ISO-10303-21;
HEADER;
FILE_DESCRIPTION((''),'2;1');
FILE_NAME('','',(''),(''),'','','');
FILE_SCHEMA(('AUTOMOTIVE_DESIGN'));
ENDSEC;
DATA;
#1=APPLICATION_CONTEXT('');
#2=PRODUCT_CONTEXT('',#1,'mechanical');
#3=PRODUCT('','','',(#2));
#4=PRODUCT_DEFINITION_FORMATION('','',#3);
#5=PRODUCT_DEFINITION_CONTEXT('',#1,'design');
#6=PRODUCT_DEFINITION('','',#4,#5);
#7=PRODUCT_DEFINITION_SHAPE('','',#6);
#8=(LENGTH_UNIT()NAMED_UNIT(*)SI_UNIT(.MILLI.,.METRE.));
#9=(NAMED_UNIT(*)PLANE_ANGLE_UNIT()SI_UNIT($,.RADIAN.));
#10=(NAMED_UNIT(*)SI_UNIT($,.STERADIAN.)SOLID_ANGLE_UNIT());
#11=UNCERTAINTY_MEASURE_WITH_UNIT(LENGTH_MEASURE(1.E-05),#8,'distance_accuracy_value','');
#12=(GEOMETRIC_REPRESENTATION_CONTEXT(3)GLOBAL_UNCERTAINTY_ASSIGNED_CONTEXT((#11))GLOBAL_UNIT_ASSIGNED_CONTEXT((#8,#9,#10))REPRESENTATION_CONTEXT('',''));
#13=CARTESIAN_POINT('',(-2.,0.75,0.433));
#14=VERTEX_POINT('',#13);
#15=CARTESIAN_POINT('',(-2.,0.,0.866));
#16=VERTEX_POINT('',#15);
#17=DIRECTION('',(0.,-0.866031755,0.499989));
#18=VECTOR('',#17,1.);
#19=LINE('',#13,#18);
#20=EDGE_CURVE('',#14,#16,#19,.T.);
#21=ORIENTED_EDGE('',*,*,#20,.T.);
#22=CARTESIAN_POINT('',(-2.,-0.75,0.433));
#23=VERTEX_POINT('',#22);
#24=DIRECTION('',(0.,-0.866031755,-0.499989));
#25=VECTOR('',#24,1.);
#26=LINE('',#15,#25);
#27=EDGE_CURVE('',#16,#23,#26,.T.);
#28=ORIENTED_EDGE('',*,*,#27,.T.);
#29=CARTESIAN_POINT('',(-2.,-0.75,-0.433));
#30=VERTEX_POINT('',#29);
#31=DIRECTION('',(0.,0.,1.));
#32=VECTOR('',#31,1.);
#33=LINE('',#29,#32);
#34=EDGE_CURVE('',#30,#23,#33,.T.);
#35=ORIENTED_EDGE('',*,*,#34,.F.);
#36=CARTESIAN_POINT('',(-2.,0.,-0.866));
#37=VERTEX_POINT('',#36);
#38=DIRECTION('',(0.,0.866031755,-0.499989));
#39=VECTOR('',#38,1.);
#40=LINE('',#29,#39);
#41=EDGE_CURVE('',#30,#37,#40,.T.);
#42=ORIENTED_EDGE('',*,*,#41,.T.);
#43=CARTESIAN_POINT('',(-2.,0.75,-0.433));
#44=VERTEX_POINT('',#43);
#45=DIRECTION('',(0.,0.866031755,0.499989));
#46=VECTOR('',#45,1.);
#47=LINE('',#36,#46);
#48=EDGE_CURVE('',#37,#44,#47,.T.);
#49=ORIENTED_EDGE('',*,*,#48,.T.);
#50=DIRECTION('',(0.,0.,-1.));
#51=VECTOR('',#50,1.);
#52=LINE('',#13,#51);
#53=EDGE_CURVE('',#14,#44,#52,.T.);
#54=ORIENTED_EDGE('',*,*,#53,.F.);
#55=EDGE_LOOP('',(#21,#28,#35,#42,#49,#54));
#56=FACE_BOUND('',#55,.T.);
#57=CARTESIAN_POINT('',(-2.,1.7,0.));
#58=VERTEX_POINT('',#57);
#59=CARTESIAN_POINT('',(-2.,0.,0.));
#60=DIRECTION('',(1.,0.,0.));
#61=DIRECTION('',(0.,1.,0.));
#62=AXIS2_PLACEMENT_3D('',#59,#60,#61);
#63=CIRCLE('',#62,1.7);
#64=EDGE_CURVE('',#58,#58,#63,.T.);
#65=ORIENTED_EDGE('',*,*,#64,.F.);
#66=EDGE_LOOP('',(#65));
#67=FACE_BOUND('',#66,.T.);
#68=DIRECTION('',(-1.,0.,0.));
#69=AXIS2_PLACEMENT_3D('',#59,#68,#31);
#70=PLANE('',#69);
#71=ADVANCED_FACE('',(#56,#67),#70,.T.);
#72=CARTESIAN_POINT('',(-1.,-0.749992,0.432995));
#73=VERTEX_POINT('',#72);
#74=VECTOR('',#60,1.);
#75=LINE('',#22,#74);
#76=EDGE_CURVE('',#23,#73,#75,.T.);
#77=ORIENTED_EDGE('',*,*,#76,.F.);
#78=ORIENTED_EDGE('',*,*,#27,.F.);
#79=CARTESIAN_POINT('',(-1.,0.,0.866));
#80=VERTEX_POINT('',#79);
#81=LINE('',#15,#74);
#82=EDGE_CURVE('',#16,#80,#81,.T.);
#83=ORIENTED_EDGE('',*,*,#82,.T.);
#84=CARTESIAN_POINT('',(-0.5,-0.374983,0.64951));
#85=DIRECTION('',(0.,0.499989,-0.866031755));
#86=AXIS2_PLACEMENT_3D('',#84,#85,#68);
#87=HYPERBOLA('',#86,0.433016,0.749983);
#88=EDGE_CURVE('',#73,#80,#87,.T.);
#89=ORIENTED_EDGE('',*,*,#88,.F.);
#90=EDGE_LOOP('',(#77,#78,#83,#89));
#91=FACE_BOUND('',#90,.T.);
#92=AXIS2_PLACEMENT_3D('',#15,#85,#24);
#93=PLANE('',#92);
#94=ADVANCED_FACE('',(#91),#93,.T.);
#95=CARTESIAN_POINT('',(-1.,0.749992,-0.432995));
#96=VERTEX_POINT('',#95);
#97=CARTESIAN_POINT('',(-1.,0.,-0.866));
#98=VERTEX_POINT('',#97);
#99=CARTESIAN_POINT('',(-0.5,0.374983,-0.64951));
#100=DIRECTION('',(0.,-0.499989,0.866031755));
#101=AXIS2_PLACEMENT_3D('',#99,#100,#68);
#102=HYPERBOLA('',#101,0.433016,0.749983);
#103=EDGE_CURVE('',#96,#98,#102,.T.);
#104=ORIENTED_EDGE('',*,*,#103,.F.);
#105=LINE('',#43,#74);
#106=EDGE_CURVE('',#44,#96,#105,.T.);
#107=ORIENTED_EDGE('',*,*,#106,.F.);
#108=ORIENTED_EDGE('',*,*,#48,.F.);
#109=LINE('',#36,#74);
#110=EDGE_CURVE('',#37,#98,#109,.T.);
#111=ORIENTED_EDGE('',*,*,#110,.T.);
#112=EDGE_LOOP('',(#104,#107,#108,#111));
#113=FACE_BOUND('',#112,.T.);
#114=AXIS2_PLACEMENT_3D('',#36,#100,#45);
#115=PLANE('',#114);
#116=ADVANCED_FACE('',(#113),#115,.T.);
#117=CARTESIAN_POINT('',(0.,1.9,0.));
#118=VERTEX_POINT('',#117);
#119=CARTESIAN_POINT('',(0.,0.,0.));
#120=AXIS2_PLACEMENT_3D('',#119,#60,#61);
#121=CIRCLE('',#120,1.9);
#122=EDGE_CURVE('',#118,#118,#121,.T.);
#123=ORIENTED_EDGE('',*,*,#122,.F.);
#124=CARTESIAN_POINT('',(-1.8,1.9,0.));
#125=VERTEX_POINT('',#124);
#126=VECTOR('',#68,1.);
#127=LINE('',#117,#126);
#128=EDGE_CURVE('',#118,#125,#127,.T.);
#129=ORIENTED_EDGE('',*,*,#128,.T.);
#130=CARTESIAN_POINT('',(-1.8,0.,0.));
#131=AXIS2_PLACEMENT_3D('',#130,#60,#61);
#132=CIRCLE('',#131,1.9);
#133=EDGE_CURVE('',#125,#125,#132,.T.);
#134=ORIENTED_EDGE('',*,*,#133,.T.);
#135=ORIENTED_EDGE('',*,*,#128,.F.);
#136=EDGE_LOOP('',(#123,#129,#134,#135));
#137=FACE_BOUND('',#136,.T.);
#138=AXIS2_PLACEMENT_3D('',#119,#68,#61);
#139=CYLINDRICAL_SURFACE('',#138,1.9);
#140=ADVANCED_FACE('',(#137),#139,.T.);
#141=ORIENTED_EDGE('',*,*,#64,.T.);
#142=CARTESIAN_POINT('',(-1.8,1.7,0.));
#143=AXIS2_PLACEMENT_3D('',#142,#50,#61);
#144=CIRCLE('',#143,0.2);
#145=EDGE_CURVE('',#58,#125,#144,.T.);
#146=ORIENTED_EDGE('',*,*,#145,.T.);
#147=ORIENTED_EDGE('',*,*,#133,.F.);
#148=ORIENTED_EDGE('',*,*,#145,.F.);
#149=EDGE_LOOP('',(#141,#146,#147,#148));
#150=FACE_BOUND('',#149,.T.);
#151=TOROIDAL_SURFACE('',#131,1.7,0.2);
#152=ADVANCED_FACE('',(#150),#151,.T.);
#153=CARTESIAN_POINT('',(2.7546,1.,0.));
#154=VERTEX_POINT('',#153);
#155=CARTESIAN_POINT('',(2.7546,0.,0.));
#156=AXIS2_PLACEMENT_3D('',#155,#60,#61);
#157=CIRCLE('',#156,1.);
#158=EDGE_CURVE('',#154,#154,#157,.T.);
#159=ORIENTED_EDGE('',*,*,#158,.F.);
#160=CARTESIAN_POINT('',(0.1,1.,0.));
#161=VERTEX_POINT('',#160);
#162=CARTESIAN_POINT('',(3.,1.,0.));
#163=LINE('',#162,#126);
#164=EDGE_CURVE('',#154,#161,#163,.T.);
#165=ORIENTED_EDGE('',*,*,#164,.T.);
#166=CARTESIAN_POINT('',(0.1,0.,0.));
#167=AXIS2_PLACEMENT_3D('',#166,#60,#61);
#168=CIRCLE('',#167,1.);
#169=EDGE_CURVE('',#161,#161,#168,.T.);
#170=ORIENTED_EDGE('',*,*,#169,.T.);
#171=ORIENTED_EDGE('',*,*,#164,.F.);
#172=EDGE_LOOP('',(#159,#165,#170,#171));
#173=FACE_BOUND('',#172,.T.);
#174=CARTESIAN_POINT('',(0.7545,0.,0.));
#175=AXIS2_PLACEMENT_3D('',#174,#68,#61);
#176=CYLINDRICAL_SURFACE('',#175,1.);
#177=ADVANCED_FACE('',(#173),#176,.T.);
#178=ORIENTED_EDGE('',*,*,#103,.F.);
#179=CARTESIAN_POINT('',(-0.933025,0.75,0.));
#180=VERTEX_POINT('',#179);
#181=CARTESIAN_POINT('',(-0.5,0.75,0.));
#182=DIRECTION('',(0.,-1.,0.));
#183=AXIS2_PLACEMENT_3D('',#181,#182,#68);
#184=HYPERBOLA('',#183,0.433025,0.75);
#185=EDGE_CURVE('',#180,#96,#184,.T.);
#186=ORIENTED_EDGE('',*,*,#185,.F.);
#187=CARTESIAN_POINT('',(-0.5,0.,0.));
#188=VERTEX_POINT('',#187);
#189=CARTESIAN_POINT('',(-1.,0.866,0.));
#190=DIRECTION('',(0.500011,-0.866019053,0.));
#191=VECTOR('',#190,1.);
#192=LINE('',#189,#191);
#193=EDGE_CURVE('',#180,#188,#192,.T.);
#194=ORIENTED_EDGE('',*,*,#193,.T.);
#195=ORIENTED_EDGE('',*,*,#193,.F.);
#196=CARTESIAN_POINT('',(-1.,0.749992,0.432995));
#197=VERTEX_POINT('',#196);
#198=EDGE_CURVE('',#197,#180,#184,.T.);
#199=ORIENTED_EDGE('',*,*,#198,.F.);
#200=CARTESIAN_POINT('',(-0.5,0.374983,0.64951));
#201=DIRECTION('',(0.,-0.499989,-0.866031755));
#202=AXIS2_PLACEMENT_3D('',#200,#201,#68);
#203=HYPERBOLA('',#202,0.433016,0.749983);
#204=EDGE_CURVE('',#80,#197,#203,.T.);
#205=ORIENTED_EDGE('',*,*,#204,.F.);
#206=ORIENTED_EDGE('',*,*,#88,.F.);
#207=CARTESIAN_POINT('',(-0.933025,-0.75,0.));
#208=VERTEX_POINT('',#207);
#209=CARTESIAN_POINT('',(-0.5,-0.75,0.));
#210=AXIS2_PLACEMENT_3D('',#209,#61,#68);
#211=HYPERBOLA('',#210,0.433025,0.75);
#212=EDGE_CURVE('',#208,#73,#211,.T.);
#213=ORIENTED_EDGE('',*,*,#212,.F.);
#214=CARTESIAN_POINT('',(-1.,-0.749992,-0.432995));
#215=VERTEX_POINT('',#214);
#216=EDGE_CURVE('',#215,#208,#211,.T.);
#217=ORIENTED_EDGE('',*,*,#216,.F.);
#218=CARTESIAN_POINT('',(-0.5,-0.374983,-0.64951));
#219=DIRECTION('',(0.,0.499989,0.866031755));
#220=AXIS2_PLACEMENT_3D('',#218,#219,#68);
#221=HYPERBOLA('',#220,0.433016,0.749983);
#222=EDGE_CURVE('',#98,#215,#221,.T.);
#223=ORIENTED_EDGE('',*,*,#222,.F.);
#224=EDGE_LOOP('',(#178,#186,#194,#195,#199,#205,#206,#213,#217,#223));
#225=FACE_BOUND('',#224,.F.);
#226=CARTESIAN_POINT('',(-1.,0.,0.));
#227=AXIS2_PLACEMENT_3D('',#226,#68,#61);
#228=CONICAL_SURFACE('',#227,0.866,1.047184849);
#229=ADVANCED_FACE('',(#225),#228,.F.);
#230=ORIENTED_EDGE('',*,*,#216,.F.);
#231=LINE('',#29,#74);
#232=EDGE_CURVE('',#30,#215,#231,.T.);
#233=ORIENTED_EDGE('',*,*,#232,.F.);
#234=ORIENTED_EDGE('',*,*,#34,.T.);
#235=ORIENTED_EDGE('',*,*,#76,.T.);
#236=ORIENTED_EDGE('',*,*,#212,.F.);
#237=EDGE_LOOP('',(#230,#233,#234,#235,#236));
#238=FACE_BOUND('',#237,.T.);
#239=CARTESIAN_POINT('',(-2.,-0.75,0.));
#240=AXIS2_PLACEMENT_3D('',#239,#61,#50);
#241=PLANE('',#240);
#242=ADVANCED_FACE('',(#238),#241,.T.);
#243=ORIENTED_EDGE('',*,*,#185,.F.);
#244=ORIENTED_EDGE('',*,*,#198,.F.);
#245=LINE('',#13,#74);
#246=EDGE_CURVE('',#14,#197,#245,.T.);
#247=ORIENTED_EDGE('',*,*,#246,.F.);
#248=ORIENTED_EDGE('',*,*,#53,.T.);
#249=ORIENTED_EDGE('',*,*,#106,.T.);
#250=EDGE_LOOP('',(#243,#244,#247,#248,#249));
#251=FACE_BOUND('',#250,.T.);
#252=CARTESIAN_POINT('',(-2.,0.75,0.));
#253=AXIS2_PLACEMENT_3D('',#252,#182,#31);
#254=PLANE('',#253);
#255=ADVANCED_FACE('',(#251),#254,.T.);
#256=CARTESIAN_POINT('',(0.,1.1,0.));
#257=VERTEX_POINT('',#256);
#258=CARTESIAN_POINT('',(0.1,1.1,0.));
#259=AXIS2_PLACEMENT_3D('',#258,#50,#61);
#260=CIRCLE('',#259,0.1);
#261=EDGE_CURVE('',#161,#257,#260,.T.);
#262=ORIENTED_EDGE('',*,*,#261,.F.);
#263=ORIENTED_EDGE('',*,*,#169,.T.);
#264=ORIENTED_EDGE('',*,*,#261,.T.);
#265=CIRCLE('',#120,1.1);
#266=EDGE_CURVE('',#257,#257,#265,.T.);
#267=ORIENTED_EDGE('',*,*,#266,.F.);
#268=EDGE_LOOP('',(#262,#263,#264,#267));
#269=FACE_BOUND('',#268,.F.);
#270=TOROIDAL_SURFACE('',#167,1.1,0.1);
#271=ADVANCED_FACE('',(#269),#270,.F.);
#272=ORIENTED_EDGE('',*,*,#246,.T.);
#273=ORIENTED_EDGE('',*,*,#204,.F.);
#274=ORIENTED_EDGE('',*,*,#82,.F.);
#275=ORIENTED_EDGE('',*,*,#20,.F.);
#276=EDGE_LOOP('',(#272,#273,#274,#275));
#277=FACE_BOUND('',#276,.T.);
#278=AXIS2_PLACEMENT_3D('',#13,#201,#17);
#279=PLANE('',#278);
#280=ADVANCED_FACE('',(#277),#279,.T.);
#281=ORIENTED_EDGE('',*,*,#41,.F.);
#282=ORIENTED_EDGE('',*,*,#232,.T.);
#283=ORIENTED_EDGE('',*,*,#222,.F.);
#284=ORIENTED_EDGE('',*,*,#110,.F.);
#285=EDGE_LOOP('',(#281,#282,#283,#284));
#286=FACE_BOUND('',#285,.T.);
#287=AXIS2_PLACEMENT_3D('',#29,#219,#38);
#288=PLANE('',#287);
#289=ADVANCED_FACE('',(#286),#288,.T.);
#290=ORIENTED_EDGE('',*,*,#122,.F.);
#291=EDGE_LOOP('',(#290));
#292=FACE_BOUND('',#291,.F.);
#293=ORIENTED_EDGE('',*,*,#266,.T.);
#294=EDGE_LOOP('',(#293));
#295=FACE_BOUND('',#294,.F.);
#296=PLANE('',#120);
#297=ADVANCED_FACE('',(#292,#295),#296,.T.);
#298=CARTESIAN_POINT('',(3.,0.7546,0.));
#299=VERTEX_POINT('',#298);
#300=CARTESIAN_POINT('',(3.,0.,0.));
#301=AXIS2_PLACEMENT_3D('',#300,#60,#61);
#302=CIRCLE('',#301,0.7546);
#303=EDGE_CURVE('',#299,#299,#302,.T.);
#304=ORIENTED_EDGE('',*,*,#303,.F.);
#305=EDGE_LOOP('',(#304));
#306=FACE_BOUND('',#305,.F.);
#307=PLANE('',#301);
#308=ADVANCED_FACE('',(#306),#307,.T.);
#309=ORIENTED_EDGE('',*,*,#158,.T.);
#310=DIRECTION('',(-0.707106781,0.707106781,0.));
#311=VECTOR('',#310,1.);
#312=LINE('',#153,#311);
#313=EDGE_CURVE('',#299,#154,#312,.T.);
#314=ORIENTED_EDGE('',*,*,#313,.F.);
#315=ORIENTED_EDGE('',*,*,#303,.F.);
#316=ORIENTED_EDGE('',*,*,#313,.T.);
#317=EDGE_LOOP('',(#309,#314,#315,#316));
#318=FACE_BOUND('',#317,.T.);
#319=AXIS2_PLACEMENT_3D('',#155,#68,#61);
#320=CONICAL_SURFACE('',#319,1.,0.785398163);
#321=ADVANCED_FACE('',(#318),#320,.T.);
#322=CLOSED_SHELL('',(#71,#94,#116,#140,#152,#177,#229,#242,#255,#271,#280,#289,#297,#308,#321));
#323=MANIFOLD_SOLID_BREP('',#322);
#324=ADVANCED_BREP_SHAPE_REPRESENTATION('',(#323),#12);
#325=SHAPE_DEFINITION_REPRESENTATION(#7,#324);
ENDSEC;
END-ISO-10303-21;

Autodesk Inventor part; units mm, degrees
ref_plane "YZ Plane" through (0, 0, 0) normal (1, 0, 0) x (0, 1, 0)
ref_plane "XZ Plane" through (0, 0, 0) normal (0, 1, 0) x (-1, 0, 0)
sketch "Sketch1" plane through (0, 0, 0) normal (0, 0, 1) x (1, 0, 0)
  line L0 (-0.5, 0) -> (3, 0)
  line L1 (3, 0) -> (3, 1)
  line L2 (3, 1) -> (1, 1)
  line L3 (1, 1) -> (0.7545, 1)
  line L4 (0.7545, 1) -> (0, 1)
  line L5 (0, 1) -> (0, 1.9)
  line L6 (0, 1.9) -> (-2, 1.9)
  line L7 (-2, 1.9) -> (-2, 0.866)
  line L8 (-2, 0.866) -> (-1, 0.866)
  line L9 (-1, 0.866) -> (-0.5, 0)
  line L10 (-3, 0) -> (4, 0) projected
  line L11 (0, -0.38) -> (0, 2.28) projected
  line L12 (1, 1) -> (0, 1) construction
  dimension "d1" = 2
  dimension "d2" = 0.2455
  dimension "d3" = 2
  dimension "d4" = 1
  dimension "d5" = 60
  dimension "d6" = 2
  dimension "d7" = 2
  dimension "d8" = 1.7321
  dimension "d9" = 3.8
  dimension "d26" = 3
revolve "Body" add sketch "Sketch1" angle 360 about axis through (-0.5, 0, 0) along (1, 0, 0)
sketch "Sketch2" plane through (-2, 0, 0) normal (-1, 0, 0) x (0, 0, 1)
  circle A0 centre (0, 0) radius 0.866 projected
  line L0 (0, -2.66) -> (0, 2.66) projected
  line L1 (-2.66, 0) -> (2.66, 0) projected
  line L2 (0.866, 0) -> (0.433, -0.75)
  line L3 (0.433, -0.75) -> (-0.433, -0.75)
  line L4 (-0.433, -0.75) -> (-0.866, 0)
  line L5 (-0.866, 0) -> (-0.433, 0.75)
  line L6 (-0.433, 0.75) -> (0.433, 0.75)
  line L7 (0.433, 0.75) -> (0.866, 0)
extrude "Slot" add sketch "Sketch2" against normal up to next contours L7 A0 | A0 L2 | L6 L0 A0 | A0 L0 L3 | L0 L6 A0 | A0 L3 L0 | L4 A0 | A0 L5
fillet "Fillet1" radius 0.2 1 edges at (-2, -1.9, 0)
thread "Thread" size "M2x0.4" class "6g" standard "ISO Metric profile" length 2
chamfer "Chamfer1" distance 0.2454 distance2 0.2454 1 edges at (3, -1, 0) measured on face at (3, -0.4588, -0.3309)
ref_plane "Work Plane1" through (29, 0, 0) normal (0, -1, 0) x (1, 0, 0)
fillet "Fillet2" radius 0.1 1 edges at (0, -1, 0)
equation "\"d30\" = R"
equation "\"d17\" = RR"
equation "\"d13\" = GEL"
equation "\"d15\" = -0.5 * SPD + 0.5 * GD"
equation "\"d16\" = GUL"
equation "\"d1\" = GEL"
equation "\"d3\" = KOH"
equation "\"d4\" = INTI"
equation "\"d6\" = GD"
equation "\"d7\" = BDM"
equation "\"d8\" = 1.1547 * SW"
equation "\"d9\" = KOD"
equation "\"d26\" = NLG"
equation "\"GD\" = 2"
equation "\"NLG\" = 3"
equation "\"GEL\" = 2"
equation "\"KOD\" = 3.8"
equation "\"KOH\" = 2"
equation "\"INTI\" = 1"
equation "\"GAL\" = 0.61345 * PTC"
equation "\"GUL\" = 0.61345 * PTC"
equation "\"BDM\" = NND"
equation "\"SW\" = 1.5"
equation "\"RR\" = 0.2"
equation "\"SPD\" = NND - 1.2269 * PTC"
equation "\"R\" = 0.1"
equation "\"TOA\" = 30deg"
equation "\"GD1\" = THREADDIA - 1.2269 * PTC"
equation "\"THREADDIA\" = 2"
equation "\"FAWI\" = 45deg"
equation "\"PTC\" = 0.4"
equation "\"NND\" = 2"
equation "\"E0\" = 1.155 * SW"
properties part number "ISO 4762 - M2 x 3" material "Stainless Steel, 440C"
